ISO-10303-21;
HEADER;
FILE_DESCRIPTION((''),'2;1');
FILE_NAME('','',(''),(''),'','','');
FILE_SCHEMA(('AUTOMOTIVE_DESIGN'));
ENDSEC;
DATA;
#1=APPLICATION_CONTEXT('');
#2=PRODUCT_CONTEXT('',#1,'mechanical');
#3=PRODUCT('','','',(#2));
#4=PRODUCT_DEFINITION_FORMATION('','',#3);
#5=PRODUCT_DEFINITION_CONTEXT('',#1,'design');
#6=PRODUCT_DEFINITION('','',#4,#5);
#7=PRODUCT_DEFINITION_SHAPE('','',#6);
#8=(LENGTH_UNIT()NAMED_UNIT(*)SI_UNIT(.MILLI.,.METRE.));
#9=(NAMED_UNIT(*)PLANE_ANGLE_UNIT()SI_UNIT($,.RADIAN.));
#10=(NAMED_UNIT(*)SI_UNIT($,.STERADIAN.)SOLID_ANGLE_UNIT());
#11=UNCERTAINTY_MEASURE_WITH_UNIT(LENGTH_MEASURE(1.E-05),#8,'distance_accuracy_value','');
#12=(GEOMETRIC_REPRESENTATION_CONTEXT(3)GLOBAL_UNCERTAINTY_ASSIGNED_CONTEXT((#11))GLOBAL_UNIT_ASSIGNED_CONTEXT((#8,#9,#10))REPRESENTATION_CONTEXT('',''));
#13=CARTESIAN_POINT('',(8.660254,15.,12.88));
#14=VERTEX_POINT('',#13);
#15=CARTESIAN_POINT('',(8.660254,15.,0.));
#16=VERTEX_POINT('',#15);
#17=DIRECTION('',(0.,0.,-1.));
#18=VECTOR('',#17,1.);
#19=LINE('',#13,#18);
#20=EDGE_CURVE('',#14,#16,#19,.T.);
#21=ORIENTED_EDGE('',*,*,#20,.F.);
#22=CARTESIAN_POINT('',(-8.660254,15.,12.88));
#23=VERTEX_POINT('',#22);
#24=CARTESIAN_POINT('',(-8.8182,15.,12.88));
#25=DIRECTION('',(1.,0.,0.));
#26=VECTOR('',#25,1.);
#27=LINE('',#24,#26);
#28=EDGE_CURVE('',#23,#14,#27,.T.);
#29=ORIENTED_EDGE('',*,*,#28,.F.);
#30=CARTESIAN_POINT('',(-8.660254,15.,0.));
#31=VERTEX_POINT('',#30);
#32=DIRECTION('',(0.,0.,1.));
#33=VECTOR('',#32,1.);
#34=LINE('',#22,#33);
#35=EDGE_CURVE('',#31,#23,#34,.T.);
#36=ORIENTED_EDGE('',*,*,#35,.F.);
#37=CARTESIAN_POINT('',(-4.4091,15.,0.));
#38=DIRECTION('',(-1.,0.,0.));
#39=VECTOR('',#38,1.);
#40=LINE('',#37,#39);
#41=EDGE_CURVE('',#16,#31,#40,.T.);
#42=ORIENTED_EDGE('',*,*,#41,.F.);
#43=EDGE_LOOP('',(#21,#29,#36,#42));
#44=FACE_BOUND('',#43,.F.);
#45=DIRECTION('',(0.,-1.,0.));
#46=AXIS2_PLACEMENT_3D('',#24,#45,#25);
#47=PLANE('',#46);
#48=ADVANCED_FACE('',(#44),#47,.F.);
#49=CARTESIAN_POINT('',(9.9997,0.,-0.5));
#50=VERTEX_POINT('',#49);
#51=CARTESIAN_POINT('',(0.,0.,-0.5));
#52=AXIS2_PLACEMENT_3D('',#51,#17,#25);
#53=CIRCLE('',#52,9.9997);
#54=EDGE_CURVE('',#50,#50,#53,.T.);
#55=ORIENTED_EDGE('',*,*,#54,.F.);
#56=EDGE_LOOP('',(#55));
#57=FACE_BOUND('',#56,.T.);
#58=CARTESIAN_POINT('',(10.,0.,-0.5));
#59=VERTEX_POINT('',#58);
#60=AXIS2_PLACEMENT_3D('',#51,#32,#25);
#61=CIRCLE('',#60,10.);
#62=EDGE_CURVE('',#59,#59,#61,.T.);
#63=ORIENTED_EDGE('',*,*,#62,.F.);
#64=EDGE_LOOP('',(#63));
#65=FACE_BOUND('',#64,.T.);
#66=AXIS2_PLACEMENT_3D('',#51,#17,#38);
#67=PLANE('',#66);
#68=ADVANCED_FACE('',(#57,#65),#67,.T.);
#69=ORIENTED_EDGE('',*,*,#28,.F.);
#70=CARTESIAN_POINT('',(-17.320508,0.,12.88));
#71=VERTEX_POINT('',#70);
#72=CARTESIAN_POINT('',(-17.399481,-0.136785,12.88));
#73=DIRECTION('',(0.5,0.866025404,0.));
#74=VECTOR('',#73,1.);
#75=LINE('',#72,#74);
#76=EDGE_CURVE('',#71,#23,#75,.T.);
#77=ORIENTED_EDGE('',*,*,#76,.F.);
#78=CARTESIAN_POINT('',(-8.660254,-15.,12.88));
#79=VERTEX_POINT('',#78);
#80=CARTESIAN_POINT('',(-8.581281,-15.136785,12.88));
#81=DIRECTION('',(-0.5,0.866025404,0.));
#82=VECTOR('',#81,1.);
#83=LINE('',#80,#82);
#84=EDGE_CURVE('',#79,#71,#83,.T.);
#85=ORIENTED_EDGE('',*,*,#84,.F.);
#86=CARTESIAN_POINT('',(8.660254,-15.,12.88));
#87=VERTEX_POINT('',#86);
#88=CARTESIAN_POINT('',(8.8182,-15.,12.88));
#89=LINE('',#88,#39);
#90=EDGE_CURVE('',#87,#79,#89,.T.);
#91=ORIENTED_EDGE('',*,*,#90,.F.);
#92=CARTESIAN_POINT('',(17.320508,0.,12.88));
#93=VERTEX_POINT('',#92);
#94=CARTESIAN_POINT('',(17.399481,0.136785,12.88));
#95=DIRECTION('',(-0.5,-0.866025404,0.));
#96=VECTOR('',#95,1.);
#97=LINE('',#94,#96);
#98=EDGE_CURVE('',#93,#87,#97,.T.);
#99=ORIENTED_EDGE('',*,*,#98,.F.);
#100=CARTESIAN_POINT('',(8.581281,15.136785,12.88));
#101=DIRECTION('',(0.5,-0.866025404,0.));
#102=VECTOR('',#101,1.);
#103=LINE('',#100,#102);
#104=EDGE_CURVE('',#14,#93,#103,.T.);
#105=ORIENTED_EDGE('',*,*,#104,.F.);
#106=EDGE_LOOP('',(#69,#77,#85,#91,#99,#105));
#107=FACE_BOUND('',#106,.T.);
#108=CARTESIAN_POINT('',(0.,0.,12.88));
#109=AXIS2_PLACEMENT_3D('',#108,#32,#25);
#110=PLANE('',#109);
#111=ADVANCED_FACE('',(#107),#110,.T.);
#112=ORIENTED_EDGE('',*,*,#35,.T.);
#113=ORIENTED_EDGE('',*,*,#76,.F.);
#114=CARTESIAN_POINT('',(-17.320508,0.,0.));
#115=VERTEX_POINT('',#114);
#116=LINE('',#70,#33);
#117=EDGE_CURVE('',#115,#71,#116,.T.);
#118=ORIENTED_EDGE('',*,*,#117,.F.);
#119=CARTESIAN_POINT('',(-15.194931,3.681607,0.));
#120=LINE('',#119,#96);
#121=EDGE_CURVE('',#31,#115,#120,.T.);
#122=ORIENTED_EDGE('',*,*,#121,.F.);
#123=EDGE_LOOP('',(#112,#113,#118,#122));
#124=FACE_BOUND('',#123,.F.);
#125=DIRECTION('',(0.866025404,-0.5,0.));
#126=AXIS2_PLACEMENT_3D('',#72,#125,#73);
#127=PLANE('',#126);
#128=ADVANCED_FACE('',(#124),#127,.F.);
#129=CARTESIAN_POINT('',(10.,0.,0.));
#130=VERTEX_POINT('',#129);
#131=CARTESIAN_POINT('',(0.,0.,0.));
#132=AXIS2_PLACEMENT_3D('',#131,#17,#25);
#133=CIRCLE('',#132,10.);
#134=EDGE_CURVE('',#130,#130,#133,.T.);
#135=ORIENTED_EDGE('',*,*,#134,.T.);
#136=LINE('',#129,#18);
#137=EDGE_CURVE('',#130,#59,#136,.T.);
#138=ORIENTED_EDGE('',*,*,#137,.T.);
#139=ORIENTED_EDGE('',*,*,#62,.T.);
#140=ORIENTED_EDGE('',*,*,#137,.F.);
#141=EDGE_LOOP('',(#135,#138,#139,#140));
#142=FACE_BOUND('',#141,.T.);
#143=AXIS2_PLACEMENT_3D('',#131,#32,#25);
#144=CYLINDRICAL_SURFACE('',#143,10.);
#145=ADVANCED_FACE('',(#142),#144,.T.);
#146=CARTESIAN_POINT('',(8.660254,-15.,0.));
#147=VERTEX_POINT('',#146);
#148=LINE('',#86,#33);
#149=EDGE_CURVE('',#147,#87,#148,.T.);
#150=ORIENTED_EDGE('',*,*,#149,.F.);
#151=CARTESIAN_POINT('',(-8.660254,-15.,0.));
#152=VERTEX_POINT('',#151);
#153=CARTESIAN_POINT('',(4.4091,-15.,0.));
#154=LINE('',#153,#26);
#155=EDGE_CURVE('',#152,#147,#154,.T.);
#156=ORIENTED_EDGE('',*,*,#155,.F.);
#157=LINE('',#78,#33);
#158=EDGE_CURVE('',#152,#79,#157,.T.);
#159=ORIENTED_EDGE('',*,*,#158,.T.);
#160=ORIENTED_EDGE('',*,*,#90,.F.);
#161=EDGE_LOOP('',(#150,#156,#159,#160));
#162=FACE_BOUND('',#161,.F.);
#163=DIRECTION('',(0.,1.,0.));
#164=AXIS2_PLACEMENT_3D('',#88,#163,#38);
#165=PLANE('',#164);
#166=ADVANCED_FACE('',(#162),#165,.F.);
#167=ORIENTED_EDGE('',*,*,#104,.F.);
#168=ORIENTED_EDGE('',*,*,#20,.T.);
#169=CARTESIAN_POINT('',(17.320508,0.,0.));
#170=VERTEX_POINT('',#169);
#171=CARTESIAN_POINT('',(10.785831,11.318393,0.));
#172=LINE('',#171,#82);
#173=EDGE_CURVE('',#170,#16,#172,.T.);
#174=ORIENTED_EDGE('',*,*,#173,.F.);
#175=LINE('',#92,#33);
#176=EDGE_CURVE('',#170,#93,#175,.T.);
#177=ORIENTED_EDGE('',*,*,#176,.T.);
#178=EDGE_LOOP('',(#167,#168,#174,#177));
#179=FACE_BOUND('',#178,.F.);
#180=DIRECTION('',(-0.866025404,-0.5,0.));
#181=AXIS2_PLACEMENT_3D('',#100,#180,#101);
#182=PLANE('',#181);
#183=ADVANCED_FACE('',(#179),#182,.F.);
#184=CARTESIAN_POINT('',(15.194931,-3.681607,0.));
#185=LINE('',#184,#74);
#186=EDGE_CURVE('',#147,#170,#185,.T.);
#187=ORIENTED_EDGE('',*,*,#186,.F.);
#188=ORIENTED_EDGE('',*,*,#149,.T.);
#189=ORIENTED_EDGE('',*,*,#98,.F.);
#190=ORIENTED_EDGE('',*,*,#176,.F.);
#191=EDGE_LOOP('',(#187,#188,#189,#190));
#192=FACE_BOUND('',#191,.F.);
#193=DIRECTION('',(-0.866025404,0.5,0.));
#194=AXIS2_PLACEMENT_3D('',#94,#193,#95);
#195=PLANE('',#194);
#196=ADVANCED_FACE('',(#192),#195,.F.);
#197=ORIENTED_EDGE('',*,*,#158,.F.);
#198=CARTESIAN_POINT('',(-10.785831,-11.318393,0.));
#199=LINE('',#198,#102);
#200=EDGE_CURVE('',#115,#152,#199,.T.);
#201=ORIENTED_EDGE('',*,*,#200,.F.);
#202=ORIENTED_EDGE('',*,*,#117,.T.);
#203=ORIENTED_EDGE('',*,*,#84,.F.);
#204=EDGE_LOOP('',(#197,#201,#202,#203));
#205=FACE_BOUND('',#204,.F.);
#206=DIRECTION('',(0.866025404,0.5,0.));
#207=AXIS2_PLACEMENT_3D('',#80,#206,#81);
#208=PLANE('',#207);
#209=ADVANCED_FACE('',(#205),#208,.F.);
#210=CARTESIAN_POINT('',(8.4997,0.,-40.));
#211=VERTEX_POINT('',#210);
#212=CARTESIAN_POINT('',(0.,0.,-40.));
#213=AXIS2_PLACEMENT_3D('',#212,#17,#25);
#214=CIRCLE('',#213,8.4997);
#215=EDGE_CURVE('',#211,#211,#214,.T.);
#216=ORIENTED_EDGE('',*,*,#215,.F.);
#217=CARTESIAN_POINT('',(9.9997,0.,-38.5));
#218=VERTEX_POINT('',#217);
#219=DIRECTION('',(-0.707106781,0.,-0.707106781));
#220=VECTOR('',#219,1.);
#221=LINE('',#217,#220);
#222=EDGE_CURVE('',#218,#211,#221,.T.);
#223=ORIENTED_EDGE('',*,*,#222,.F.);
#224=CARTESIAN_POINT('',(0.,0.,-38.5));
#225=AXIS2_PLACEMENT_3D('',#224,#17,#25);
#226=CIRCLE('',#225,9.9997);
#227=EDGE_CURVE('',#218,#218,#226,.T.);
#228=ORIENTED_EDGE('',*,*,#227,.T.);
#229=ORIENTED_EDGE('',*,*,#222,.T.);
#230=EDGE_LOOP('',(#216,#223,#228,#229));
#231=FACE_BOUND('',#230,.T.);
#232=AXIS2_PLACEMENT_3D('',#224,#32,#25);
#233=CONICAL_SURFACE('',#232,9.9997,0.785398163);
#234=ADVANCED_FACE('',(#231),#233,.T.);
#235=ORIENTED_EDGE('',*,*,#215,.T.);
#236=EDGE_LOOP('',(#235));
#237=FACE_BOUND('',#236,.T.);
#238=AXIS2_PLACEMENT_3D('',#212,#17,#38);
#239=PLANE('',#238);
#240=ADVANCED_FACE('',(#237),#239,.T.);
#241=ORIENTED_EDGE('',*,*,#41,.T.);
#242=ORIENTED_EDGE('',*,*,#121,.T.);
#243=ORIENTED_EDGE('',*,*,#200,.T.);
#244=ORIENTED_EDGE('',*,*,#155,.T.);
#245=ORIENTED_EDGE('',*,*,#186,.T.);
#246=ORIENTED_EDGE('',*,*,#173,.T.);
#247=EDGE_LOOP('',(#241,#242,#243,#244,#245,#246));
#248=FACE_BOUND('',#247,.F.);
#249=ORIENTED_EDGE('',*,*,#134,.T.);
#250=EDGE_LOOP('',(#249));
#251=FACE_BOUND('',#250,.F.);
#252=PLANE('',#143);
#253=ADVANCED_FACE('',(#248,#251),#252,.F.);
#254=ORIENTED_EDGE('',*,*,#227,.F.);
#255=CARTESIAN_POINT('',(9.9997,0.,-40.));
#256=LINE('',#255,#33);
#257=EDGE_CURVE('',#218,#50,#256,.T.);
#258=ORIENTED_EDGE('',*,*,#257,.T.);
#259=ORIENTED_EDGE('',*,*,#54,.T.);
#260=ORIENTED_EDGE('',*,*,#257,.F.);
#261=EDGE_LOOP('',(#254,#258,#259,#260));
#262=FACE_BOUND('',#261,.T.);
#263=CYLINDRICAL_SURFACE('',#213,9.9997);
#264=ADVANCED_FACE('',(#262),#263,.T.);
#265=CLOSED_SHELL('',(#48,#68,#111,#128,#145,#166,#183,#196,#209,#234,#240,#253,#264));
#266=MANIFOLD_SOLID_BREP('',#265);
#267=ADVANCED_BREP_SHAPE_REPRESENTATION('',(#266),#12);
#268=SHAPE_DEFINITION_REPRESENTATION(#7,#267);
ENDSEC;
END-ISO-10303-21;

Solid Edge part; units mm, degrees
sketch "Sketch1" plane through (0, 0, 0) normal (0, 0, 1) x (1, 0, 0)
  circle A0 centre (0, 0) radius 17.4
  dimension "D1" = 34.8
extrude "Protrusion1" add sketch "Sketch1" along normal blind 12.88
sketch "Sketch2" plane through (0, 0, 0) normal (0, 0, -1) x (1, 0, 0)
  circle A0 centre (0, 0) radius 10
extrude "Protrusion2" add sketch "Sketch2" along normal blind 40
sketch "Sketch3" plane through (0, 0, -40) normal (0, 0, -1) x (1, 0, 0)
  circle A0 centre (0, 0) radius 9.9997
extrude "Cutout1" cut sketch "Sketch3" against normal blind 39.5 flip side to cut
chamfer "Chamfer_1" distance 1.5 angle 45 1 edges at (-9.9997, 0, -40)
sketch "Sketch4" plane through (0, 0, 12.88) normal (0, 0, 1) x (1, 0, 0)
  line L0 (-8.8182, 15) -> (8.8182, 15)
  dimension "D1" = 30
extrude "Cutout2" cut sketch "Sketch4" against normal up to next material side at (0, 15.05, 12.88)
pattern_circular "Pattern1" count 6 over 360 about axis through (0, 0, 12.88) along (0, 0, 1) of "Cutout2"
properties part number "24104768"
